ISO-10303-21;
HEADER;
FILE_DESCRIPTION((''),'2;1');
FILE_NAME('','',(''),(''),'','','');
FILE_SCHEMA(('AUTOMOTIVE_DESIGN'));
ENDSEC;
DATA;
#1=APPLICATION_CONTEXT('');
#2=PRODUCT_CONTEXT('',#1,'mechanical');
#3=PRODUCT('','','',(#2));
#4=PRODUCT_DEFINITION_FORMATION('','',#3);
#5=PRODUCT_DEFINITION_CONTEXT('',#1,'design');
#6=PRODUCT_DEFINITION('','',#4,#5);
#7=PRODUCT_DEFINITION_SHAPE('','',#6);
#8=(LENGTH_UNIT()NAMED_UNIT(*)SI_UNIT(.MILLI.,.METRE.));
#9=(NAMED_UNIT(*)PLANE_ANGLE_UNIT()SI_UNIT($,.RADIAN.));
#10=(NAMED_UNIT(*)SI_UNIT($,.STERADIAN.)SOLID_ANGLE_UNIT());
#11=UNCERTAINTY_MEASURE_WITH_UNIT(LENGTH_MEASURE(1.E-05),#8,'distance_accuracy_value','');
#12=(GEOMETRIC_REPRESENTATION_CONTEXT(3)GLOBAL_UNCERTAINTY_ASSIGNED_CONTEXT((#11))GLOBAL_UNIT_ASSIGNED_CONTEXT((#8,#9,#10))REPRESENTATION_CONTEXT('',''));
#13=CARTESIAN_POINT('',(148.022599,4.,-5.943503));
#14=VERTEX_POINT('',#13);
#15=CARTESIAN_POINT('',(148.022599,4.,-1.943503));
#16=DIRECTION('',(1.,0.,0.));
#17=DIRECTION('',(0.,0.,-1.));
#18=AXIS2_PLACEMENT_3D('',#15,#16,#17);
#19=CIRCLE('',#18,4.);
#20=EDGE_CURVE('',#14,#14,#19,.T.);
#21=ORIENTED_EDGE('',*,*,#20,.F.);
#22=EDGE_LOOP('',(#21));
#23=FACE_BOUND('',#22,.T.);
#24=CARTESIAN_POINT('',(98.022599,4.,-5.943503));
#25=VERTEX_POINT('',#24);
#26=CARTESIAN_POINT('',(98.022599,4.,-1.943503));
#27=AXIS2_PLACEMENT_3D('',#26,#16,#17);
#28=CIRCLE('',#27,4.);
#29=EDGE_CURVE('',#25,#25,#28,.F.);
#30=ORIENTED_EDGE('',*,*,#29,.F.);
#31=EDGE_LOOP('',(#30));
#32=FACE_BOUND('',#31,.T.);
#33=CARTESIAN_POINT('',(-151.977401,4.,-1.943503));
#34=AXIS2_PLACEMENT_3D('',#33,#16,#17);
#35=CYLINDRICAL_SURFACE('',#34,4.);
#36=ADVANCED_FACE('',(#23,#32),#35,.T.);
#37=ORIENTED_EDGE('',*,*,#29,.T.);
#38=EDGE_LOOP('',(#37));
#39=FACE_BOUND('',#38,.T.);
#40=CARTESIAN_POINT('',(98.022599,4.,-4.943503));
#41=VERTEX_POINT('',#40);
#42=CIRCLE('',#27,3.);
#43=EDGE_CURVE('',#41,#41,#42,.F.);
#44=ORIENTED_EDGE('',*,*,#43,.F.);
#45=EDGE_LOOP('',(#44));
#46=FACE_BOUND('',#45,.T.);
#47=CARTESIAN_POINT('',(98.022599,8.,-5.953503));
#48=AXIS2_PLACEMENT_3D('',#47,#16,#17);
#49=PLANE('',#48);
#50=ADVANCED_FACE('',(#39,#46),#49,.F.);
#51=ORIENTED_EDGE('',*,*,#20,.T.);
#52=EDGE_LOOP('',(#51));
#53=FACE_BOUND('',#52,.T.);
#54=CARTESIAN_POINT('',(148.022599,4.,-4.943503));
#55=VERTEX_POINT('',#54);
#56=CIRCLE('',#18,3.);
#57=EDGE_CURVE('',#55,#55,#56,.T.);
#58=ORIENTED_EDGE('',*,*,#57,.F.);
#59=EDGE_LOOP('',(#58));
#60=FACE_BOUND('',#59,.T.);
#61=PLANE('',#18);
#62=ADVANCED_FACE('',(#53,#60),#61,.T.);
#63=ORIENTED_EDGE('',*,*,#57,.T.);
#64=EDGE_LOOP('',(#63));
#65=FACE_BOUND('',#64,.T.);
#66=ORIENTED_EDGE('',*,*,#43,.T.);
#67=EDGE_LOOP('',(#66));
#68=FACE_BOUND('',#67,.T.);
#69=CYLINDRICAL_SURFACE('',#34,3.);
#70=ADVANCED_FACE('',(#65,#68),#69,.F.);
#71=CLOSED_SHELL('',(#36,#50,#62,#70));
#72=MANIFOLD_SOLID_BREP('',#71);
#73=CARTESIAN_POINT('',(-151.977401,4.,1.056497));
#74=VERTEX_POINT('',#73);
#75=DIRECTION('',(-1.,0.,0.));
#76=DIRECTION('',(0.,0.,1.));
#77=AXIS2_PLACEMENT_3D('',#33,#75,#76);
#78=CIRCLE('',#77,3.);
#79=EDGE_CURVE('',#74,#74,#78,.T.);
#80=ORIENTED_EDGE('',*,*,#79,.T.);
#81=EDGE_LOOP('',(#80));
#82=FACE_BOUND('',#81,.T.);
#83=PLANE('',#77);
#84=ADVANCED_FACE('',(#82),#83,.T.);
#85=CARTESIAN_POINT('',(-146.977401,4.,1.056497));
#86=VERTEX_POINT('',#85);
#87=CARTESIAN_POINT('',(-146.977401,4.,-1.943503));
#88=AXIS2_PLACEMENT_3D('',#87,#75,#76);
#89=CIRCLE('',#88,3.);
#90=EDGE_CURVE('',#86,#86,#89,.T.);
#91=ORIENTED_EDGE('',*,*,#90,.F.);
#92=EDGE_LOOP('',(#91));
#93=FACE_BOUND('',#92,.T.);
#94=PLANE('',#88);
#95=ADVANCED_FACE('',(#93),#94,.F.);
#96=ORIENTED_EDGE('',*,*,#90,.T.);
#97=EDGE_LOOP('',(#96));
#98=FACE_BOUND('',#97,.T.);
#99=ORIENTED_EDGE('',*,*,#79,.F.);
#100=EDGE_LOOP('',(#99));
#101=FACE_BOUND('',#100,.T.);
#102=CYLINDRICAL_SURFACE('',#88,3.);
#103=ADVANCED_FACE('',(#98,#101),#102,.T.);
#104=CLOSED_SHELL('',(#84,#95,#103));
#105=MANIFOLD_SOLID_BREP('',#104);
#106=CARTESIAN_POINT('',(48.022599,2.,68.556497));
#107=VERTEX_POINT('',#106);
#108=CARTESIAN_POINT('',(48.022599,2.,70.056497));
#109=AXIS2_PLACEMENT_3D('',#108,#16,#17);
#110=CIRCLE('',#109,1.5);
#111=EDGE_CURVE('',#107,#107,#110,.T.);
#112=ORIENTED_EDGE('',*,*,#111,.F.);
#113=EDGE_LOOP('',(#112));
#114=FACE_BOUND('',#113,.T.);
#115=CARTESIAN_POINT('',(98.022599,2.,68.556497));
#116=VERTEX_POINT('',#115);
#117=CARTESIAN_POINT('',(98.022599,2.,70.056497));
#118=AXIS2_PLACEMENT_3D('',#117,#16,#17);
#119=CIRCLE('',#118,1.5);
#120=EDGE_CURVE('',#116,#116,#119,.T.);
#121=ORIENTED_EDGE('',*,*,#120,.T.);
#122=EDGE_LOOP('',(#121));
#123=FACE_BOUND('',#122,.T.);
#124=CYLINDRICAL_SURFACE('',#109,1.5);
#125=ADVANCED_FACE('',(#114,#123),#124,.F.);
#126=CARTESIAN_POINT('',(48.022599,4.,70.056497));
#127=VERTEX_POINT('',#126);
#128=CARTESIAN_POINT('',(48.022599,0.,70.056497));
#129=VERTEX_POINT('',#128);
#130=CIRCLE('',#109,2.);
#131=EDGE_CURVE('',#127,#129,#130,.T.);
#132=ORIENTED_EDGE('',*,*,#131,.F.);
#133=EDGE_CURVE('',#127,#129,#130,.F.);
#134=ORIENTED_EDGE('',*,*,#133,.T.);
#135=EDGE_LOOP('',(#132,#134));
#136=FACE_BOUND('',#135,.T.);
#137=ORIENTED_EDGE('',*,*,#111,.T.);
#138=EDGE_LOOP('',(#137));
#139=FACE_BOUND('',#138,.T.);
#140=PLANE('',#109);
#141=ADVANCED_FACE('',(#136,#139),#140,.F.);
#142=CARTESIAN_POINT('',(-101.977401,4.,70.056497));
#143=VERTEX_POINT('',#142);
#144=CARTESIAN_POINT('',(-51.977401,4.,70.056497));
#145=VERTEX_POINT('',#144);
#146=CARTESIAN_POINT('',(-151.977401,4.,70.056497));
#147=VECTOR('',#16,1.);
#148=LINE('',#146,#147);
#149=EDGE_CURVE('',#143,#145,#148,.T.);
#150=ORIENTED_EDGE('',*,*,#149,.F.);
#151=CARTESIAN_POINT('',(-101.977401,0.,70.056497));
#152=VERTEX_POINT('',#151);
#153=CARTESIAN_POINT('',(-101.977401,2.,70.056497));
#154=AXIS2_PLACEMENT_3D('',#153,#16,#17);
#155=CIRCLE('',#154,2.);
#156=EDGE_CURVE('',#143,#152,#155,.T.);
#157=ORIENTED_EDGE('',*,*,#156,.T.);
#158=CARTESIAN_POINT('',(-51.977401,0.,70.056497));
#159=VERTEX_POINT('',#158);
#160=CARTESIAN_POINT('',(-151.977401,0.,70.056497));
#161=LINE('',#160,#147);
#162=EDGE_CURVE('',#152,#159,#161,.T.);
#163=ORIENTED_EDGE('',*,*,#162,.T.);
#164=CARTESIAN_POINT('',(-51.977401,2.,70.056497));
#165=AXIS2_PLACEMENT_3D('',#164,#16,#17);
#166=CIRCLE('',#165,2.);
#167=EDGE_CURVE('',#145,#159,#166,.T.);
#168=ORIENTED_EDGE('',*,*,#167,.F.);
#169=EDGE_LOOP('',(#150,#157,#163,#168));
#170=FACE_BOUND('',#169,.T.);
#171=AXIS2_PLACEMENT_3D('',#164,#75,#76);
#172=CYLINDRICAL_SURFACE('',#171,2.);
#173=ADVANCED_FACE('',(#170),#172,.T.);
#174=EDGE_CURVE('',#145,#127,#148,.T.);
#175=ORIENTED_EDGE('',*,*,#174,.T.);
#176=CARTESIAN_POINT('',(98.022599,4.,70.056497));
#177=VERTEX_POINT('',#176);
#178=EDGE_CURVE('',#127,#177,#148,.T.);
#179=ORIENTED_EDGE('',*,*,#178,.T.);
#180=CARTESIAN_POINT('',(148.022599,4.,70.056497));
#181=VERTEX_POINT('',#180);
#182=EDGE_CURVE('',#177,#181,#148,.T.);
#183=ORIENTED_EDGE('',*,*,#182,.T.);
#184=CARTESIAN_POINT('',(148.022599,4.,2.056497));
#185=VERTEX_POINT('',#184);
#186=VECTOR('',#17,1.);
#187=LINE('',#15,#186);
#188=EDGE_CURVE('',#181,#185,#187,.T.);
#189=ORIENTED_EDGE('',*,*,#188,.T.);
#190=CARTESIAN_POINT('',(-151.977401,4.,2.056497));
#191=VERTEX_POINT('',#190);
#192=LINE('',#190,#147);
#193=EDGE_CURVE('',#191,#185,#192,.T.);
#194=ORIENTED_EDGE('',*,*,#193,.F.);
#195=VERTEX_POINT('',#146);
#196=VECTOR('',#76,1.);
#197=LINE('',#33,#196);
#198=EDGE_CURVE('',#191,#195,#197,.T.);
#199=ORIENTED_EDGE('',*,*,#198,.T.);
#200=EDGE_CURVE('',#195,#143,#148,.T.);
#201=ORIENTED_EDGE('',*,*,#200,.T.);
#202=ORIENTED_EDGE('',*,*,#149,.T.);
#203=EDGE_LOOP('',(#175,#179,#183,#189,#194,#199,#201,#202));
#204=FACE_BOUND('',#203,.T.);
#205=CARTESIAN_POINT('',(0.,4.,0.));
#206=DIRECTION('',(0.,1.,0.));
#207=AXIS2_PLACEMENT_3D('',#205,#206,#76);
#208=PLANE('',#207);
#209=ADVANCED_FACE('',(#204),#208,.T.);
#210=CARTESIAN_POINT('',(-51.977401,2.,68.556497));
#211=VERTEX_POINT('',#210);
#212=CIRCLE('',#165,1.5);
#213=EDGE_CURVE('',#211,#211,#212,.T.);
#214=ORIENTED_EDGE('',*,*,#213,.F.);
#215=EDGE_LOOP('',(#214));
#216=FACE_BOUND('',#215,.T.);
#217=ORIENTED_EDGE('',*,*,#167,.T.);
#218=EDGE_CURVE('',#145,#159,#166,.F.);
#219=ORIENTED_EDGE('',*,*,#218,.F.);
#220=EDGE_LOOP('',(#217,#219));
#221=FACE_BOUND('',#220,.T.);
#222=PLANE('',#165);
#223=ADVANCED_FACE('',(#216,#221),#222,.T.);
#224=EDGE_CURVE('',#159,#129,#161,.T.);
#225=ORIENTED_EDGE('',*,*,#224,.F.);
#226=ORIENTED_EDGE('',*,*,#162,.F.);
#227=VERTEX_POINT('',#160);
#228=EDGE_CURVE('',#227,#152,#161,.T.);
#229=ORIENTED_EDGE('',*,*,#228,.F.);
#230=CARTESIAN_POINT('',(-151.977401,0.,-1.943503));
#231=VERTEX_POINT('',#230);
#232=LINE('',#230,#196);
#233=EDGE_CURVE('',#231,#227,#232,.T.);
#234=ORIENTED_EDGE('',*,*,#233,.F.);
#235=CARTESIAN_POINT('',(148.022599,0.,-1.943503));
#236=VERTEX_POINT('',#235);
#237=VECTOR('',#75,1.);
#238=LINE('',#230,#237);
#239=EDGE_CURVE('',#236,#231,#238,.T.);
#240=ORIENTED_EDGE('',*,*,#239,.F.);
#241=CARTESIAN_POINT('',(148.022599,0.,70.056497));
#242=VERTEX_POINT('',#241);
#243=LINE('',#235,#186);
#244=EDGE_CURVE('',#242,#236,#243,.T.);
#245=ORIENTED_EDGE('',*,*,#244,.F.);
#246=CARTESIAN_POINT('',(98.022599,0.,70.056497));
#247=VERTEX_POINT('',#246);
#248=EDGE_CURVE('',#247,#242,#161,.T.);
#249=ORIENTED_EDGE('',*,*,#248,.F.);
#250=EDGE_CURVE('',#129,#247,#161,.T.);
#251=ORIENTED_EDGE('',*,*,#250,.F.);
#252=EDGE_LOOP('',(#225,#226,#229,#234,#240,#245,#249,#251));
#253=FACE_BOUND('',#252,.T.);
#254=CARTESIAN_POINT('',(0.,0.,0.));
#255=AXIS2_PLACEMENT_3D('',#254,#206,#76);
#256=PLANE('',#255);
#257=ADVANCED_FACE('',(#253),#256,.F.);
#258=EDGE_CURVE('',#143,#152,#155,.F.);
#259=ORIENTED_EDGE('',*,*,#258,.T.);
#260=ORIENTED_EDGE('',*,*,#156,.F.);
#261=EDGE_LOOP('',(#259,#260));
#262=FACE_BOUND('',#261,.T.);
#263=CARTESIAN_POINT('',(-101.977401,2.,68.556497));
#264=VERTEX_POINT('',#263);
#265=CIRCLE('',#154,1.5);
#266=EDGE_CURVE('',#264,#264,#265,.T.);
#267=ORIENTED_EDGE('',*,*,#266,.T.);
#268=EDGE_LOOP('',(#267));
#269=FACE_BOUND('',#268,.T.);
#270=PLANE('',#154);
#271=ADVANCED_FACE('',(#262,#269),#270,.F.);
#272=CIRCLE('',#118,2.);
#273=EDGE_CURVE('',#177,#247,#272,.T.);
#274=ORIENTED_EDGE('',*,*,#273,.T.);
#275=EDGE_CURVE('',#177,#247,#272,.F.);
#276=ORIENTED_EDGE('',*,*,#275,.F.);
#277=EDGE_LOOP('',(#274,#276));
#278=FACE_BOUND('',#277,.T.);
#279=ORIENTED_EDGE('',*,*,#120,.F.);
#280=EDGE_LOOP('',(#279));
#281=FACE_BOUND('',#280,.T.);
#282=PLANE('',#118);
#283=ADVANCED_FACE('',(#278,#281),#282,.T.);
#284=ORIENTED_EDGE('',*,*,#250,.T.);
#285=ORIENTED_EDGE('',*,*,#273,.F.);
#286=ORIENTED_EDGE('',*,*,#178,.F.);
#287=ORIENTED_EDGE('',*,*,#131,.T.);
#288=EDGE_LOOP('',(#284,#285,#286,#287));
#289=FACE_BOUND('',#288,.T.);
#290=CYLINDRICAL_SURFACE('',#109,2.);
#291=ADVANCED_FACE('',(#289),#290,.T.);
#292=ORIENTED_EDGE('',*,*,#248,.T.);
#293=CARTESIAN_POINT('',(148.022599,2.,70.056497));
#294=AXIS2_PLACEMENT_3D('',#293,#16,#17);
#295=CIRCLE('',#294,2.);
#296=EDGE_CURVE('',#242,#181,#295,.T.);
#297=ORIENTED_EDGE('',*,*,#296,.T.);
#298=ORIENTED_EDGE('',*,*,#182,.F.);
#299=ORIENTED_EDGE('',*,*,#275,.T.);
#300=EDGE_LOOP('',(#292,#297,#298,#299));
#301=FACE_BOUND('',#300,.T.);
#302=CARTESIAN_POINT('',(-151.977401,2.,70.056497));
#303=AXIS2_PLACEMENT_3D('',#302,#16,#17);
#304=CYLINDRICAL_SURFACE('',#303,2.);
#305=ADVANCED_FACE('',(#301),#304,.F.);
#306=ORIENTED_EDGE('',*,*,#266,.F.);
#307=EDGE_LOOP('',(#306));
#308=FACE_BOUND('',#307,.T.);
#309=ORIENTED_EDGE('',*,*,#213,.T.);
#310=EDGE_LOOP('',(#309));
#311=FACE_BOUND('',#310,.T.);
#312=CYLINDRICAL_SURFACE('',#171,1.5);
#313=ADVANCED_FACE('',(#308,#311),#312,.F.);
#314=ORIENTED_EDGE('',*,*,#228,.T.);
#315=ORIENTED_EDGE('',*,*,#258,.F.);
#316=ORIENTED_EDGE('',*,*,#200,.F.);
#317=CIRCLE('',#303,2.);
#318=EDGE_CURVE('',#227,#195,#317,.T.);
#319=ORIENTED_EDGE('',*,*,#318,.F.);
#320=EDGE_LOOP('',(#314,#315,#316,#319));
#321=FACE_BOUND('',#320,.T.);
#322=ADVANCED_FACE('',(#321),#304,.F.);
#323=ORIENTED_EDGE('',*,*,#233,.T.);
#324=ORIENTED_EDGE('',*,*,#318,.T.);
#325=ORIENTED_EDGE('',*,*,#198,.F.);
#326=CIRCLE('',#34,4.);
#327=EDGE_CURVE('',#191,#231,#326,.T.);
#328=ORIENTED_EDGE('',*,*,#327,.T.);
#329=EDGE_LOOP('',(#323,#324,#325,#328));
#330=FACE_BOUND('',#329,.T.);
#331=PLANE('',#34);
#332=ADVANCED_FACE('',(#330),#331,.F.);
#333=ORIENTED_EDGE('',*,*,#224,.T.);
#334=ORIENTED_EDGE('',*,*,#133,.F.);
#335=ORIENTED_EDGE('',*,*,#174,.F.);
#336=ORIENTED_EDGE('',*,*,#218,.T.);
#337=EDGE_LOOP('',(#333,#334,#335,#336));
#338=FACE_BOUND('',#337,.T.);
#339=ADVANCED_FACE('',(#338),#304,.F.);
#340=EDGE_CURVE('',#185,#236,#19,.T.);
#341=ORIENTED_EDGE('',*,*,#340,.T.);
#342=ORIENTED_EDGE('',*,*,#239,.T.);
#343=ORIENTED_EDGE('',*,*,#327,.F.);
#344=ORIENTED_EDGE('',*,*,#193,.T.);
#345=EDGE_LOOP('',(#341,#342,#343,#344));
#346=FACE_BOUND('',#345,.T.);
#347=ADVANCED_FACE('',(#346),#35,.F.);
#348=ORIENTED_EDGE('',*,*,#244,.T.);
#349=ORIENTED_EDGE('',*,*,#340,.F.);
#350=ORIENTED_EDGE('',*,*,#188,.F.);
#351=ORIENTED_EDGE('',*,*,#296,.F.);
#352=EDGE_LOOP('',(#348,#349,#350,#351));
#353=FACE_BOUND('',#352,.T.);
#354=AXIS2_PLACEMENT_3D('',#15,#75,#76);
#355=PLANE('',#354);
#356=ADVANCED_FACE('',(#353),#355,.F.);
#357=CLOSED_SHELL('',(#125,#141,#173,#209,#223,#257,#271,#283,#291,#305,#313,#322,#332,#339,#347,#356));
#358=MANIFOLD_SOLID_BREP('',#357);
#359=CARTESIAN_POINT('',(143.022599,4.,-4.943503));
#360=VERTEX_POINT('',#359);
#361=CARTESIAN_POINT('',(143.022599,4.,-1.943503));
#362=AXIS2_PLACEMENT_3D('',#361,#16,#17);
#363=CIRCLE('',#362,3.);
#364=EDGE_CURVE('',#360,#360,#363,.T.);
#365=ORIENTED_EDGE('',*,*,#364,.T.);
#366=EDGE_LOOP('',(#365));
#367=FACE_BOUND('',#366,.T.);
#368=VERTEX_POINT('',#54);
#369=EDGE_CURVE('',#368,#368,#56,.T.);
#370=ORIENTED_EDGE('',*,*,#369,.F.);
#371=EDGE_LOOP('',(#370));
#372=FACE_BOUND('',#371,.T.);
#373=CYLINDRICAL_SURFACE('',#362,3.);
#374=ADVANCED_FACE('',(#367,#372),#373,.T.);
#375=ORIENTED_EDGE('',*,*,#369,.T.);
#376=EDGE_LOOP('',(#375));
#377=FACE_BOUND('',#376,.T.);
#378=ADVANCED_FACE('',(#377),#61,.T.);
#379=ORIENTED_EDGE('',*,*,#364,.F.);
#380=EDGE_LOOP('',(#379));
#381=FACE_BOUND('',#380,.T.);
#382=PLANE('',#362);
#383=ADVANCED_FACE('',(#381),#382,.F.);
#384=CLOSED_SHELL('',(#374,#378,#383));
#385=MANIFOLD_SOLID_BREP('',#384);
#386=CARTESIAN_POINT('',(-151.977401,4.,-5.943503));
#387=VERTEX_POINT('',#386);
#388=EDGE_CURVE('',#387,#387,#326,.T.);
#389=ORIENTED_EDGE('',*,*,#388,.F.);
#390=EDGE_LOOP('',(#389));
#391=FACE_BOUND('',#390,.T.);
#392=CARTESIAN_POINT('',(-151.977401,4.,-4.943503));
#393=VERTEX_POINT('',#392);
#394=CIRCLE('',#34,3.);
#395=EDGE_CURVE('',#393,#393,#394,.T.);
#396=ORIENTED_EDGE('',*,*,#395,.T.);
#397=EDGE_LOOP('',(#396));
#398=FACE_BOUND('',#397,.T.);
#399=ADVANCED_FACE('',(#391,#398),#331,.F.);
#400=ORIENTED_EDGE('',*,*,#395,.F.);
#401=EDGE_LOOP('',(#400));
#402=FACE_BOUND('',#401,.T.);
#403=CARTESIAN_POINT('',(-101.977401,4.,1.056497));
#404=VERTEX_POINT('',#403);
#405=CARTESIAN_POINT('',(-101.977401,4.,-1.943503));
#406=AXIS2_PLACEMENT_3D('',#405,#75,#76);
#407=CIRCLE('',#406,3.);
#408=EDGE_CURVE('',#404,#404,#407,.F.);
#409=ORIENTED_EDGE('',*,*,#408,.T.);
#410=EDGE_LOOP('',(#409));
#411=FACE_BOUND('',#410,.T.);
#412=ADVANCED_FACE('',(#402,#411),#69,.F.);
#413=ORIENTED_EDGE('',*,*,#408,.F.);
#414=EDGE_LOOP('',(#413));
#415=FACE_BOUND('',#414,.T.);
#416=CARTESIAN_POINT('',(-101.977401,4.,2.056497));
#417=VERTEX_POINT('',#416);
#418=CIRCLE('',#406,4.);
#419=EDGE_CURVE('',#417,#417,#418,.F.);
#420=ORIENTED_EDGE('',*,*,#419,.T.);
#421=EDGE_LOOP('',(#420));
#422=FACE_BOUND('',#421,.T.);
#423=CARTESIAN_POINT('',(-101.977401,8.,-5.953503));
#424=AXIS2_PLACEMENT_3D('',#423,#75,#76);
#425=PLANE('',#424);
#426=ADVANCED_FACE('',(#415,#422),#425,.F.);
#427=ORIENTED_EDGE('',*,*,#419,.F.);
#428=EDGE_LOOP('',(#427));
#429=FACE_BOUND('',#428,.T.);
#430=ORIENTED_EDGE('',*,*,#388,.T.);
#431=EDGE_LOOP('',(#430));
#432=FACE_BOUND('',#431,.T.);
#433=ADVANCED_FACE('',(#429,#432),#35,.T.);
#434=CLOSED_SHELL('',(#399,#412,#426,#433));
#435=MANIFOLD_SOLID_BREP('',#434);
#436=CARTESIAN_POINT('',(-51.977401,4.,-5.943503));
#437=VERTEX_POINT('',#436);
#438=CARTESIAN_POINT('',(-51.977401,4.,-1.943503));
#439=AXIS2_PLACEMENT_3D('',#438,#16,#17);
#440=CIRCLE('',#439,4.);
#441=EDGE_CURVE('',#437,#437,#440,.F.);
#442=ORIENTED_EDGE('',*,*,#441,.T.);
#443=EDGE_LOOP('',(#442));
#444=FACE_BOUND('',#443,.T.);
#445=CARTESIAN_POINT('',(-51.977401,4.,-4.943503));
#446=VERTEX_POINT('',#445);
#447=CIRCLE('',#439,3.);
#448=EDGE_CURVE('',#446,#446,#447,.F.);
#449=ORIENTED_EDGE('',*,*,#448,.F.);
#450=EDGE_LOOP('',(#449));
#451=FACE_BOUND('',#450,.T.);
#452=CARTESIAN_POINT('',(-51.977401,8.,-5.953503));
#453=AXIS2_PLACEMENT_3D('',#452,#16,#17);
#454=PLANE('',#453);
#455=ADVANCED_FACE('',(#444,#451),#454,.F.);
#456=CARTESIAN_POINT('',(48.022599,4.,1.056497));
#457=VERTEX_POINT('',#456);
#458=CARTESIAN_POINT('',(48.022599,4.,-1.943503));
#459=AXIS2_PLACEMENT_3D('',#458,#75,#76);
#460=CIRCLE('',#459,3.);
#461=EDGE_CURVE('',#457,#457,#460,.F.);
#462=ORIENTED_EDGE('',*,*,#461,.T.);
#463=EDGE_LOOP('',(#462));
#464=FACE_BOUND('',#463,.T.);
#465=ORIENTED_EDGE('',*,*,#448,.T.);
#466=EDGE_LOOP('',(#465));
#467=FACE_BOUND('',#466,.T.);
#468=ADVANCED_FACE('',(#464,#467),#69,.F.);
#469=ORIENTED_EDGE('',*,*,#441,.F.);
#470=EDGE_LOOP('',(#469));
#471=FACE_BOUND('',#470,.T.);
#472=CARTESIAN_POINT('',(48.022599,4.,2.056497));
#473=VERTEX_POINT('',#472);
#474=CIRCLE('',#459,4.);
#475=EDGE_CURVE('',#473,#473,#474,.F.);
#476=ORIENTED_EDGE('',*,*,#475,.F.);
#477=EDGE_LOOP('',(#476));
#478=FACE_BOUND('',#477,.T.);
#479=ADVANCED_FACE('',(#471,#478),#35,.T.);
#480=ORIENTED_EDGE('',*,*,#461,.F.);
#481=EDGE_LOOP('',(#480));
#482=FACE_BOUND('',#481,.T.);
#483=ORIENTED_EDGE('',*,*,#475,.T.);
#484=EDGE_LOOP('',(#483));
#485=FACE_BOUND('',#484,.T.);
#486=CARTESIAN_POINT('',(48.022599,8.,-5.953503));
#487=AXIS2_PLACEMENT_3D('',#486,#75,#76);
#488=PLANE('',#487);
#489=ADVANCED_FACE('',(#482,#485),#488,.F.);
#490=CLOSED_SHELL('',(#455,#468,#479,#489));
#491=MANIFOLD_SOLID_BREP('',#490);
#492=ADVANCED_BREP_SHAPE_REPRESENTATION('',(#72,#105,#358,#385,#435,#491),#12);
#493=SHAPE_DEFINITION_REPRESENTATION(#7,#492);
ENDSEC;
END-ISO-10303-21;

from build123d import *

# Parameters (mm, degrees)
SKETCH_1_W                   = 300
SKETCH_1_H                   = 72
EXTRUDE_1_DEPTH              = 4
SKETCH_2_R                   = 4
CUT_EXTRUDE_1_DEPTH          = 300
SKETCH_3_R                   = 4
SKETCH_3_R_2                 = 3
EXTRUDE_1_2_DEPTH            = 300
SKETCH_5_R                   = 3
EXTRUDE_2_DEPTH              = 5
SKETCH_6_R                   = 3
EXTRUDE_3_DEPTH              = 5
SPLIT_START                  = -101.97740113
SPLIT_BODIES_1_OUTLINE_R     = 4
SPLIT_BODIES_1_OUTLINE_R_2   = 3
SPLIT_BODIES_1_DEPTH         = 50
SPLIT_START_2                = 48.02259887
SPLIT_BODIES_1_2_OUTLINE_R   = 4
SPLIT_BODIES_1_2_OUTLINE_R_2 = 3
SPLIT_BODIES_1_2_DEPTH       = 50
SKETCH_7_R                   = 2
CUT_EXTRUDE_2_DEPTH          = 309.175133319
EXTRUDE_START                = 50
SKETCH_8_R                   = 2
SKETCH_8_R_2                 = 1.5
EXTRUDE_3_2_DEPTH            = 50
SKETCH_10_R                  = 2
SKETCH_10_R_2                = 1.5
EXTRUDE_4_DEPTH              = 50


# Read off the part's stored shape, not the designer's step: 分割1
with BuildPart() as part:
    # 草图1 → Extrude 1 (new body)
    with BuildSketch(Plane(origin=(0, 0, 0), x_dir=(1, 0, 0), z_dir=(0, 1, 0))):
        with Locations((-1.97740113, -34.056497175)):
            Rectangle(SKETCH_1_W, SKETCH_1_H)
    extrude(amount=EXTRUDE_1_DEPTH)

    # 草图2 → 切除-拉伸1 (cut)
    with BuildSketch(Plane(origin=(148.02259887, 0, 0), x_dir=(0, 0, -1), z_dir=(1, 0, 0))):
        with Locations((1.943502825, 4)):
            Circle(SKETCH_2_R)
    extrude(amount=-CUT_EXTRUDE_1_DEPTH, mode=Mode.SUBTRACT)

    # 草图7 → 切除-拉伸2 (cut, through all)
    with BuildSketch(Plane(origin=(148.02259887, 0, 0), x_dir=(0, 0, -1), z_dir=(1, 0, 0))):
        with Locations((-70.056497175, 2)):
            Circle(SKETCH_7_R)
    extrude(amount=-CUT_EXTRUDE_2_DEPTH, mode=Mode.SUBTRACT)

    # 草图8 → Extrude 3 2 (add)
    with BuildSketch(Plane(origin=(-101.97740113, 0, 0), x_dir=(0, 0, -1), z_dir=(1, 0, 0)).offset(EXTRUDE_START)):
        with Locations((-70.056497175, 2)):
            Circle(SKETCH_8_R)
        with Locations((-70.056497175, 2)):
            Circle(SKETCH_8_R_2, mode=Mode.SUBTRACT)
    extrude(amount=-EXTRUDE_3_2_DEPTH)

    # 草图10 → 拉伸-薄壁4 (add)
    with BuildSketch(Plane(origin=(98.02259887, 0, 0), x_dir=(0, 0, -1), z_dir=(1, 0, 0))):
        with Locations((-70.056497175, 2)):
            Circle(SKETCH_10_R)
        with Locations((-70.056497175, 2)):
            Circle(SKETCH_10_R_2, mode=Mode.SUBTRACT)
    extrude(amount=-EXTRUDE_4_DEPTH)


with BuildPart() as body_2:
    # 草图3 → Extrude 1 2 (new body)
    with BuildSketch(Plane(origin=(148.02259887, 0, 0), x_dir=(0, 0, -1), z_dir=(1, 0, 0))):
        with Locations((1.943502825, 4)):
            Circle(SKETCH_3_R)
        with Locations((1.943502825, 4)):
            Circle(SKETCH_3_R_2, mode=Mode.SUBTRACT)
    extrude(amount=-EXTRUDE_1_2_DEPTH)

    # Split Bodies 1 outline → Split Bodies 1 (cut)
    with BuildSketch(Plane.YZ.offset(SPLIT_START)):
        with Locations((4, -1.943502825)):
            Circle(SPLIT_BODIES_1_OUTLINE_R)
        with Locations((4, -1.943502825)):
            Circle(SPLIT_BODIES_1_OUTLINE_R_2, mode=Mode.SUBTRACT)
    extrude(amount=SPLIT_BODIES_1_DEPTH, mode=Mode.SUBTRACT)

    # Split Bodies 1 2 outline → Split Bodies 1 2 (cut)
    with BuildSketch(Plane.YZ.offset(SPLIT_START_2)):
        with Locations((4, -1.943502825)):
            Circle(SPLIT_BODIES_1_2_OUTLINE_R)
        with Locations((4, -1.943502825)):
            Circle(SPLIT_BODIES_1_2_OUTLINE_R_2, mode=Mode.SUBTRACT)
    extrude(amount=SPLIT_BODIES_1_2_DEPTH, mode=Mode.SUBTRACT)


with BuildPart() as body_3:
    # 草图5 → 凸台-拉伸2 (new body)
    with BuildSketch(Plane(origin=(148.02259887, 0, 0), x_dir=(0, 0, -1), z_dir=(1, 0, 0))):
        with Locations((1.943502825, 4)):
            Circle(SKETCH_5_R)
    extrude(amount=-EXTRUDE_2_DEPTH)


with BuildPart() as body_4:
    # 草图6 → Extrude 3 (new body)
    with BuildSketch(Plane.ZY.offset(151.97740113)):
        with Locations((-1.943502825, 4)):
            Circle(SKETCH_6_R)
    extrude(amount=-EXTRUDE_3_DEPTH)


solid = Compound([part.part, body_2.part, body_3.part, body_4.part])
